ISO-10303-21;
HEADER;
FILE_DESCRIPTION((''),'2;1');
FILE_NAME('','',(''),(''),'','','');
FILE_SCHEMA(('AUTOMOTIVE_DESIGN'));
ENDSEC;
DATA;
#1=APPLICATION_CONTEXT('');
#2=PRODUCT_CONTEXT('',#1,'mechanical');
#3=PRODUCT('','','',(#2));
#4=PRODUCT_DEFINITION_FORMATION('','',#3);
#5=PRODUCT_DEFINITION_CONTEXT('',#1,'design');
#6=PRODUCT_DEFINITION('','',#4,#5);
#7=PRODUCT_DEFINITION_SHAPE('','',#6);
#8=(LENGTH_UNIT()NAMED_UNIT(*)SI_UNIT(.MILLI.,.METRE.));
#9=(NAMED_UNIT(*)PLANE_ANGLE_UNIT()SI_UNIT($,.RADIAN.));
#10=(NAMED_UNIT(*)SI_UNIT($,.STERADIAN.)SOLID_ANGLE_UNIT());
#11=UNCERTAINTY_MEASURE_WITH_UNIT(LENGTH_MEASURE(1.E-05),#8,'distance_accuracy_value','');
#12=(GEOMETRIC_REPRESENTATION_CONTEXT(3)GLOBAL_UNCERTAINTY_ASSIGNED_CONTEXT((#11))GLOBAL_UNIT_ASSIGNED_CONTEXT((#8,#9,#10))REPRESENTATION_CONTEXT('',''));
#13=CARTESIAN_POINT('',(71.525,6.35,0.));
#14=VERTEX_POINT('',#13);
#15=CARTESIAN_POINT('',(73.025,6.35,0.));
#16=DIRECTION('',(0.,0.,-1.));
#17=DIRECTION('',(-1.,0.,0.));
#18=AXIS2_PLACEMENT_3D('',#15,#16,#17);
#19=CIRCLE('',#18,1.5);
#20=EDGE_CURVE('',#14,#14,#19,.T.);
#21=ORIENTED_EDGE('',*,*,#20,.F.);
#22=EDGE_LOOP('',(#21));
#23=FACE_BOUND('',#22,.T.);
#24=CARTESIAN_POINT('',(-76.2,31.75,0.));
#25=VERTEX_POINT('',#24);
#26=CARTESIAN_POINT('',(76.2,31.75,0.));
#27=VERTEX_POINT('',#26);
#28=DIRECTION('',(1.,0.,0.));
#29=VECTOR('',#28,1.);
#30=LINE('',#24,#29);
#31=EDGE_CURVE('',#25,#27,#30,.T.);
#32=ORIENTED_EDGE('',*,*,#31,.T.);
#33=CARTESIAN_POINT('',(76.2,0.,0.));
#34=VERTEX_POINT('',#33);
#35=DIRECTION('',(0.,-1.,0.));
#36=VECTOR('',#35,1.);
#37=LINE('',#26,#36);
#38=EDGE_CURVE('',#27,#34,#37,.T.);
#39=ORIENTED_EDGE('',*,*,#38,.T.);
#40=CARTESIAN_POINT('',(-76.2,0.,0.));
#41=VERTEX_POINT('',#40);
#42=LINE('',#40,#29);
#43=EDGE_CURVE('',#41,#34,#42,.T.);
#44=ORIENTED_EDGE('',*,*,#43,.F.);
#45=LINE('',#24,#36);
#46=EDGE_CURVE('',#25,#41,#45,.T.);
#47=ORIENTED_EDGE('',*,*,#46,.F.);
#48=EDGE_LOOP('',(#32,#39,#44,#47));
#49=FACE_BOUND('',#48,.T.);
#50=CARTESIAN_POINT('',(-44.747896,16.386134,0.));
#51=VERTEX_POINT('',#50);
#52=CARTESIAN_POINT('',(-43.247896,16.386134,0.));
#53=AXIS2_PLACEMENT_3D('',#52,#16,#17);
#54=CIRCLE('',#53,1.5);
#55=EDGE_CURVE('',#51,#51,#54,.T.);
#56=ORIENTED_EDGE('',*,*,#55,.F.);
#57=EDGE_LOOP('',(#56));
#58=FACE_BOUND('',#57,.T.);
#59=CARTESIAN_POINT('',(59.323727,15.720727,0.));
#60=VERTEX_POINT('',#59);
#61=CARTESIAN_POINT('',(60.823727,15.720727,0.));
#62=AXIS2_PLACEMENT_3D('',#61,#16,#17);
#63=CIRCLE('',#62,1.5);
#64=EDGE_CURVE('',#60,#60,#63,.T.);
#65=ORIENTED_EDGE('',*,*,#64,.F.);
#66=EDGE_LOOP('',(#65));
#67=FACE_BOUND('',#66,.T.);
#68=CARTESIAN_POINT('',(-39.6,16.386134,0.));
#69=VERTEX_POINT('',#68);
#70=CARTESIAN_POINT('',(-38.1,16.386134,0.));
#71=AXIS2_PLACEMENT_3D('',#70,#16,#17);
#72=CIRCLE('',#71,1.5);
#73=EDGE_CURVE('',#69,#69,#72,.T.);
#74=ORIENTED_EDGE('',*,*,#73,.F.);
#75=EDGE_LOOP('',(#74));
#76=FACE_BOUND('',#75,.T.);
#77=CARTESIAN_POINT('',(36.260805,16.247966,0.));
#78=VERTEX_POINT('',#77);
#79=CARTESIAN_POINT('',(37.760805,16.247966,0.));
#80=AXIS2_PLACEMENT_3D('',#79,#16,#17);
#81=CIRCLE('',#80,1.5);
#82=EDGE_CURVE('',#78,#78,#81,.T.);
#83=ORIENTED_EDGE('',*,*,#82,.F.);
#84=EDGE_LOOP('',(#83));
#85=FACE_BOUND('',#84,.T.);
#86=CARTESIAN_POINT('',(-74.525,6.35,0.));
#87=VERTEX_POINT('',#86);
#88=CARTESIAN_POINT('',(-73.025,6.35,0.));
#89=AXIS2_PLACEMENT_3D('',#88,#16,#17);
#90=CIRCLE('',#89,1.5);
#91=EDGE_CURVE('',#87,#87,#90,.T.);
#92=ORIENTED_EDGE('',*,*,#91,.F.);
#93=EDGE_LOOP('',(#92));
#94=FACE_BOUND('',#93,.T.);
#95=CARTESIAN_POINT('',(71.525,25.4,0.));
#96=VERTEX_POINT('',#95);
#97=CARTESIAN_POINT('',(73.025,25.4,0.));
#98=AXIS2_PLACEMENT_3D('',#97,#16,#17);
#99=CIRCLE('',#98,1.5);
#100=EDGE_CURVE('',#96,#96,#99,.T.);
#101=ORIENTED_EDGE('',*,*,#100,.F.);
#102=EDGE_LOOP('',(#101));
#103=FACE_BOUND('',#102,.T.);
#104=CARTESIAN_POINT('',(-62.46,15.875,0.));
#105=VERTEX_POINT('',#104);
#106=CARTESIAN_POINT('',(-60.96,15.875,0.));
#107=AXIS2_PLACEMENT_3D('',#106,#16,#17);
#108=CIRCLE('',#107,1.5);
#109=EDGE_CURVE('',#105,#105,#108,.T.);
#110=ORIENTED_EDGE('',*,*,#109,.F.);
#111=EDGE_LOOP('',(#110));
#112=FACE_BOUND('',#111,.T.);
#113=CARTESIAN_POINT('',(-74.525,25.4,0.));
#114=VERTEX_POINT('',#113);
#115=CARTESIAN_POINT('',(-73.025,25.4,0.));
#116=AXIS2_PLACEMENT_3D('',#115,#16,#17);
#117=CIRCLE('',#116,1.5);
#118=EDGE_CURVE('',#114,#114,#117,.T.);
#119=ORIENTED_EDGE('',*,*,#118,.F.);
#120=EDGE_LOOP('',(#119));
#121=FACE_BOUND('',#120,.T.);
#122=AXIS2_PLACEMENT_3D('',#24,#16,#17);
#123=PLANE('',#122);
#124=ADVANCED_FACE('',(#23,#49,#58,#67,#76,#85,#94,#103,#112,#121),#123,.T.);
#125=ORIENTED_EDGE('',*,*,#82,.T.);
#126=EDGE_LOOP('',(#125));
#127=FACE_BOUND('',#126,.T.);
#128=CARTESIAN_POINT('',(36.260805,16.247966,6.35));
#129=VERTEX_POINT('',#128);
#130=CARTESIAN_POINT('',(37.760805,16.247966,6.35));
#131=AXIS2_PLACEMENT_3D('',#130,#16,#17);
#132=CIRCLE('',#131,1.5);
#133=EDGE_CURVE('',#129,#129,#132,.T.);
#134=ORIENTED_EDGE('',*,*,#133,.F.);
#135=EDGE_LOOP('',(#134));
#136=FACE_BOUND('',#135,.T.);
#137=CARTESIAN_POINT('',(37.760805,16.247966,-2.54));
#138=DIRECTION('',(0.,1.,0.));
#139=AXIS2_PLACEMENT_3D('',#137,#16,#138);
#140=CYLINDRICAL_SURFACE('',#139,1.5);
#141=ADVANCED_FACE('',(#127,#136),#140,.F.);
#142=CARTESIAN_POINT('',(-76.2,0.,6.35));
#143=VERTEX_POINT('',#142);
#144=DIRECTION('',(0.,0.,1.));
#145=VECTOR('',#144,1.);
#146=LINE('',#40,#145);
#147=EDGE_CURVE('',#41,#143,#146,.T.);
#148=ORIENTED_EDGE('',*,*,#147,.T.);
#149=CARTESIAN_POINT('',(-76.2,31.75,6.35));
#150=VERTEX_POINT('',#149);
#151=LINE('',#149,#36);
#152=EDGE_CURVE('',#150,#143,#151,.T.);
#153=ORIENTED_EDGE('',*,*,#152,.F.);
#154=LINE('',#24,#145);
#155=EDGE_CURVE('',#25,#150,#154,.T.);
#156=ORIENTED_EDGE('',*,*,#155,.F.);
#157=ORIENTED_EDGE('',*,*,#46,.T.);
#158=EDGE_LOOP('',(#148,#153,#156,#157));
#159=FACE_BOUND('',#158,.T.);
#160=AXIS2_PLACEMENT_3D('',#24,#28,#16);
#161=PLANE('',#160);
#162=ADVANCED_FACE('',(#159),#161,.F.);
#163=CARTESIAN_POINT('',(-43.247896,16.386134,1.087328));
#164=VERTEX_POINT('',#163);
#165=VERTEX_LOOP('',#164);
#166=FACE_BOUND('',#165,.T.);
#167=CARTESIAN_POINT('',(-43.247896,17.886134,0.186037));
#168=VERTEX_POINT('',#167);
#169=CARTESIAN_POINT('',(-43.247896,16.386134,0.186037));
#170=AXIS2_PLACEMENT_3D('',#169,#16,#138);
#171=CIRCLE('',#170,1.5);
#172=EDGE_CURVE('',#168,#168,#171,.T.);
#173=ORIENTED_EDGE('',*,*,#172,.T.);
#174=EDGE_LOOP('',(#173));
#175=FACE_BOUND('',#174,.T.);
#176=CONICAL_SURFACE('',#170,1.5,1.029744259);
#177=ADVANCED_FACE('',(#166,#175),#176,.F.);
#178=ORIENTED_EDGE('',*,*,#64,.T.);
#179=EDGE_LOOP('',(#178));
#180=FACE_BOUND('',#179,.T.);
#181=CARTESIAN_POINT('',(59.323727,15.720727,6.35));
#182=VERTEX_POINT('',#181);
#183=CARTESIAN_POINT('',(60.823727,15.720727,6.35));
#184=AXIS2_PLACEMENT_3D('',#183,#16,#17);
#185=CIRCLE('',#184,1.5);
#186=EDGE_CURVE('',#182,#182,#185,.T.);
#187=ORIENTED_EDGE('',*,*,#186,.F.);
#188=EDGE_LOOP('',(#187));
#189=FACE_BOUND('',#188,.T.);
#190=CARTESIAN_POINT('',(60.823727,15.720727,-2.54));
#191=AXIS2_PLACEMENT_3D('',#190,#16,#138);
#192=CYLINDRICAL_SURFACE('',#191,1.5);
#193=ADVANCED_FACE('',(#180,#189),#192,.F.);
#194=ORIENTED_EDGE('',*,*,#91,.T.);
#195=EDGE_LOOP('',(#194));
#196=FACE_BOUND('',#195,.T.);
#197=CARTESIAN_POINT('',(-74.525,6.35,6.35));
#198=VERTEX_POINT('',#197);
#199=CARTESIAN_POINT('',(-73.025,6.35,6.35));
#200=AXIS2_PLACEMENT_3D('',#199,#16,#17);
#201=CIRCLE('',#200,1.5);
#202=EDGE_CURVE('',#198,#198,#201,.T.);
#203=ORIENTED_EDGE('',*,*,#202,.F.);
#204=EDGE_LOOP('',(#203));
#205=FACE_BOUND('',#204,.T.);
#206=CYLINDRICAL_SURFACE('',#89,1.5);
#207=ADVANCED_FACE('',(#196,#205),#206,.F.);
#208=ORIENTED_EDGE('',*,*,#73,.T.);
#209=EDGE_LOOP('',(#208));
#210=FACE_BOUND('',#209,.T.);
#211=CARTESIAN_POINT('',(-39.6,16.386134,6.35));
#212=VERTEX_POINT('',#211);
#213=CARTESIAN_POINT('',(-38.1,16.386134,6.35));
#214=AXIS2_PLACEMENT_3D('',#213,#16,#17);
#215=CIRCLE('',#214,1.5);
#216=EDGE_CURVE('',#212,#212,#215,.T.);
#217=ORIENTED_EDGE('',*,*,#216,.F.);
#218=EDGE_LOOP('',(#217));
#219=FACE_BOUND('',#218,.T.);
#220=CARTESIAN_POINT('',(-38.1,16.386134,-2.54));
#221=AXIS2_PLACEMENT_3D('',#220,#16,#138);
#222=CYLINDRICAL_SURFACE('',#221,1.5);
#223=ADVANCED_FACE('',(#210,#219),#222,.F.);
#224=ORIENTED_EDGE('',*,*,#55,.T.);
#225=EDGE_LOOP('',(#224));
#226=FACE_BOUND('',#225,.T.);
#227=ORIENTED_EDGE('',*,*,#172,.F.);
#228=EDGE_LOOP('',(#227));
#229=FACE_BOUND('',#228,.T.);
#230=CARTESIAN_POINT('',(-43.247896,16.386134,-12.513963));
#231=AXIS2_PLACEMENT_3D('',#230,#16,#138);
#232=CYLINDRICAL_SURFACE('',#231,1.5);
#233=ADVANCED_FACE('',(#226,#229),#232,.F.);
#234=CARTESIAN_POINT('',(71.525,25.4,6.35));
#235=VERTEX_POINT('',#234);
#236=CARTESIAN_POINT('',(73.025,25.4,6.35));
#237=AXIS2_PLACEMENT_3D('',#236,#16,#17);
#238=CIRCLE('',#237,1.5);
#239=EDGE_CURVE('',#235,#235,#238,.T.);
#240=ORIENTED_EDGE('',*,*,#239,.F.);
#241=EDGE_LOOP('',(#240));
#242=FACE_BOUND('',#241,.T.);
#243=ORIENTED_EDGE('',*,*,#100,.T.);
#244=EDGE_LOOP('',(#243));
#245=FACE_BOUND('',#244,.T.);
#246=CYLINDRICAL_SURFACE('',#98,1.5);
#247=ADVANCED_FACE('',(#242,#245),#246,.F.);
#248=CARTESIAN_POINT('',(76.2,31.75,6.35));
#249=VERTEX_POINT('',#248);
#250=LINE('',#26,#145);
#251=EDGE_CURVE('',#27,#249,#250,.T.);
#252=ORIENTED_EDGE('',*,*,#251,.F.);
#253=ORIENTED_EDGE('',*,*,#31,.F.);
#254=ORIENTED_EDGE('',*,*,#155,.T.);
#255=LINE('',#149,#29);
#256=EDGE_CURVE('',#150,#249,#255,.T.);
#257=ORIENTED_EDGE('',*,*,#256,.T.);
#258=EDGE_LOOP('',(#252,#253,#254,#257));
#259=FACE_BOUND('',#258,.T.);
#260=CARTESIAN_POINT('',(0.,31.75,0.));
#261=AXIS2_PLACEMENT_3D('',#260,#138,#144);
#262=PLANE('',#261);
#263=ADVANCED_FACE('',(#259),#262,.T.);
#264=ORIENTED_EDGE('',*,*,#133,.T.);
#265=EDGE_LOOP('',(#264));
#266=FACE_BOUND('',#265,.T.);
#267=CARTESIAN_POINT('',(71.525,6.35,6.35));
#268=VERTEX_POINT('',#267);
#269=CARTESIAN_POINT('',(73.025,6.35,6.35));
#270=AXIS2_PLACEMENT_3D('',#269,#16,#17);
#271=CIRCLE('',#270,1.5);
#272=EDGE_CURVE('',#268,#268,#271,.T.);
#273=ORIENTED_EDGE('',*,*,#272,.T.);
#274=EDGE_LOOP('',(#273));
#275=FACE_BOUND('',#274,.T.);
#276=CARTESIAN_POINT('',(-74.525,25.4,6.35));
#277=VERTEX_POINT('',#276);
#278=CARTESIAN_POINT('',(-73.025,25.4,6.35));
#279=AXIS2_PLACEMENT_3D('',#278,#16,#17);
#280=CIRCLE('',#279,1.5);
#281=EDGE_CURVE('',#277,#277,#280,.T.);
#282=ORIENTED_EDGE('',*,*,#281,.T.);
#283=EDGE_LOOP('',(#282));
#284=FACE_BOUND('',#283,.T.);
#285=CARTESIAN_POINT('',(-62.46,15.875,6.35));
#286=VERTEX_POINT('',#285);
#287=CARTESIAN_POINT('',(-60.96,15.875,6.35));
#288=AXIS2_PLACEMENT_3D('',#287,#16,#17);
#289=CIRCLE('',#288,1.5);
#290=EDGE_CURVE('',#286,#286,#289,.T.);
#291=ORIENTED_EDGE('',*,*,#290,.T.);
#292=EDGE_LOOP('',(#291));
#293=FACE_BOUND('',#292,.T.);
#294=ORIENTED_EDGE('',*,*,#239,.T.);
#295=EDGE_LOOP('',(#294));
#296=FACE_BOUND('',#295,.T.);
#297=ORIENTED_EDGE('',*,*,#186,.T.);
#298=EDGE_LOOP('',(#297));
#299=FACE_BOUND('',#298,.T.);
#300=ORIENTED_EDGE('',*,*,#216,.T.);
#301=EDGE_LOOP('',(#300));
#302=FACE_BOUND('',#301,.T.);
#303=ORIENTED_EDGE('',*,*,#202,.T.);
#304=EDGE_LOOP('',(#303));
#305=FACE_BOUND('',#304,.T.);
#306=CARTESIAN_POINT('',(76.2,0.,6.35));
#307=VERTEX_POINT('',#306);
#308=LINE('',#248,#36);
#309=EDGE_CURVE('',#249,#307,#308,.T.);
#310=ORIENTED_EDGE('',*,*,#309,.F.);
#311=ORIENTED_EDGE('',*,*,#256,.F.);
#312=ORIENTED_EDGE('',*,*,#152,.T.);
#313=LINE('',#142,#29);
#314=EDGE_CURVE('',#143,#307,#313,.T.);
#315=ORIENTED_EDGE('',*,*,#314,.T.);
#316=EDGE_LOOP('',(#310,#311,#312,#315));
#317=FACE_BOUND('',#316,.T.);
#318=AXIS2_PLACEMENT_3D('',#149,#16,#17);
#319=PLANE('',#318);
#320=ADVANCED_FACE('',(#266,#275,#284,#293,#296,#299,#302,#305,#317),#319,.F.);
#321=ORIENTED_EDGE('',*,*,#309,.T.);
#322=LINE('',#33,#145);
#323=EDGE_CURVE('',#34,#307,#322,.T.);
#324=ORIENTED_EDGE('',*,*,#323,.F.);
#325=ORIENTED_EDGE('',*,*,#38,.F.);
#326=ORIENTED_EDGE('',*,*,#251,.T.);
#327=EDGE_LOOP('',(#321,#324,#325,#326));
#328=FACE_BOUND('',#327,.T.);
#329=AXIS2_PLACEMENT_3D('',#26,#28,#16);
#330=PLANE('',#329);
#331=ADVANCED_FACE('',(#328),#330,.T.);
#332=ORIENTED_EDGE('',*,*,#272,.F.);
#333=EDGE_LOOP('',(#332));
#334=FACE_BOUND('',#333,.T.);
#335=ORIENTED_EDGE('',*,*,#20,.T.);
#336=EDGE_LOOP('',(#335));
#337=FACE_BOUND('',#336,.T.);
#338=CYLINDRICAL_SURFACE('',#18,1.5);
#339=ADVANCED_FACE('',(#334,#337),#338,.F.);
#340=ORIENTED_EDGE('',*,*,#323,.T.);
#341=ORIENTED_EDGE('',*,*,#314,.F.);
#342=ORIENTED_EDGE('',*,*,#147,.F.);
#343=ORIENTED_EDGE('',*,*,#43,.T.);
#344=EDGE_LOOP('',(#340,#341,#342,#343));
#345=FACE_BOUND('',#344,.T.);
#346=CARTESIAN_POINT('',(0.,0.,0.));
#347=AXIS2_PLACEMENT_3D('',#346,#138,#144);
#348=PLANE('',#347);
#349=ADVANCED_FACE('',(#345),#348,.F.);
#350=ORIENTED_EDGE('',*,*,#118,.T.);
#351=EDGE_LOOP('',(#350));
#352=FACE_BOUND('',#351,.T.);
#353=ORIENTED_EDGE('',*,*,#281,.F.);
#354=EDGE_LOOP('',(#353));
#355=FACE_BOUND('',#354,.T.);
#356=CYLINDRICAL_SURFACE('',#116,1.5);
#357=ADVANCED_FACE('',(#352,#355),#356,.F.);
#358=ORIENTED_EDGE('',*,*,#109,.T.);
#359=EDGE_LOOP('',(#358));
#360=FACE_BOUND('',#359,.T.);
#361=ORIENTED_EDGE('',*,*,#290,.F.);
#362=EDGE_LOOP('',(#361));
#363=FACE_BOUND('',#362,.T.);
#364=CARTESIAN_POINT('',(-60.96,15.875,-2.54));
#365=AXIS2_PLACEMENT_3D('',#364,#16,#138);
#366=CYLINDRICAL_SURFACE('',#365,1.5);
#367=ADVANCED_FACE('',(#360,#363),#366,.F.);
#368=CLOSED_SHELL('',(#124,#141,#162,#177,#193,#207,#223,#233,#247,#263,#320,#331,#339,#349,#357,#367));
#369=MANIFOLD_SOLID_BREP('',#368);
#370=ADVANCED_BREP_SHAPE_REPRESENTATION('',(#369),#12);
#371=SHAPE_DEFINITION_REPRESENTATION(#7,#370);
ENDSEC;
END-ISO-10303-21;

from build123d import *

# Parameters (mm, degrees)
SKETCH1_W                      = 152.4
SKETCH1_H                      = 6.35
WALL_DEPTH                     = 31.75
F_3_0MM_DOWEL_HOLE2_AT_2_COUNT = 2
F_3_0MM_DOWEL_HOLE2_AT_2_PITCH = 19.05
F_3_0MM_DOWEL_HOLE1_D          = 3
F_3_0MM_DOWEL_HOLE1_DEPTH      = 12.7
F_3_0MM_DOWEL_HOLE1_TIP        = 0.901290929
F_3_0MM_DOWEL_HOLE4_D          = 3
F_3_0MM_DOWEL_HOLE4_DEPTH      = 12.7
F_3_0MM_DOWEL_HOLE4_TIP        = 0.901290929
F_3_0MM_DOWEL_HOLE5_OUTLINE_R  = 1.5
F_3_0MM_DOWEL_HOLE5_DEPTH      = 6.35


# Read off the part's stored shape, not the designer's step: Ø3.0mm Dowel Hole5, Ø3.0mm Dowel Hole6
with BuildPart() as part:
    # Sketch1 → wall (new body)
    with BuildSketch(Plane(origin=(0, 0, 0), x_dir=(1, 0, 0), z_dir=(0, 1, 0))):
        with Locations((0, -3.175)):
            Rectangle(SKETCH1_W, SKETCH1_H)
    extrude(amount=WALL_DEPTH)

    # Sketch5 → Ø3.0mm Dowel Hole2 (revolve, cut)
    with BuildSketch(Plane(origin=(-73.025, 25.4, 0), x_dir=(0, 1, 0), z_dir=(1, 0, 0))):
        Polygon((0, 0), (0, 15.901286329), (1.5, 14.9999954), (1.5, 0), align=None)
    f_3_0mm_dowel_hole2 = revolve(axis=Axis((-73.025, 25.4, -6.35), (0, 0, 1)), mode=Mode.SUBTRACT)

    # Ø3.0mm Dowel Hole2 at 2: Ø3.0mm Dowel Hole2 ×2
    with Locations(*[(0, -i * F_3_0MM_DOWEL_HOLE2_AT_2_PITCH, 0) for i in range(1, F_3_0MM_DOWEL_HOLE2_AT_2_COUNT)]):
        add(f_3_0mm_dowel_hole2, mode=Mode.SUBTRACT)

    # Mirror1: Ø3.0mm Dowel Hole2 across plane
    add(f_3_0mm_dowel_hole2.mirror(Plane(origin=(0, 0, 0), x_dir=(0, 0, 1), z_dir=(1, 0, 0))), mode=Mode.SUBTRACT)

    # Mirror1 copy 1 sketch → Mirror1 copy 1 (revolve, cut)
    with BuildSketch(Plane(origin=(73.025, 6.35, 0), x_dir=(0, 1, 0), z_dir=(-1, 0, 0))):
        Polygon((0, 0), (0, -15.901286329), (1.5, -14.9999954), (1.5, 0), align=None)
    revolve(axis=Axis((73.025, 6.35, -6.35), (0, 0, -1)), mode=Mode.SUBTRACT)

    # Ø3.0mm Dowel Hole1
    with Locations(Plane(origin=(76.2, 31.75, -2.54), x_dir=(1, 0, 0), z_dir=(0, 0, -1))):
        with Locations((-137.16, 15.875)):
            Hole(F_3_0MM_DOWEL_HOLE1_D / 2, depth=F_3_0MM_DOWEL_HOLE1_DEPTH)
            with Locations((0, 0, -(F_3_0MM_DOWEL_HOLE1_DEPTH + F_3_0MM_DOWEL_HOLE1_TIP / 2))):  # 118° drill point
                Cone(0, F_3_0MM_DOWEL_HOLE1_D / 2, F_3_0MM_DOWEL_HOLE1_TIP, mode=Mode.SUBTRACT)

    # Ø3.0mm Dowel Hole4
    with Locations(Plane(origin=(76.2, 31.75, -2.54), x_dir=(1, 0, 0), z_dir=(0, 0, -1))):
        with Locations((-38.439194916, 15.502033877), (-15.376273346, 16.029273481)):
            Hole(F_3_0MM_DOWEL_HOLE4_D / 2, depth=F_3_0MM_DOWEL_HOLE4_DEPTH)
            with Locations((0, 0, -(F_3_0MM_DOWEL_HOLE4_DEPTH + F_3_0MM_DOWEL_HOLE4_TIP / 2))):  # 118° drill point
                Cone(0, F_3_0MM_DOWEL_HOLE4_D / 2, F_3_0MM_DOWEL_HOLE4_TIP, mode=Mode.SUBTRACT)

    # Ø3.0mm Dowel Hole5 outline → Ø3.0mm Dowel Hole5 (cut)
    with BuildSketch(Plane.XY):
        with Locations((-38.1, 16.386133576)):
            Circle(F_3_0MM_DOWEL_HOLE5_OUTLINE_R)
    extrude(amount=F_3_0MM_DOWEL_HOLE5_DEPTH, mode=Mode.SUBTRACT)

    # Ø3.0mm Dowel Hole6 outline → Ø3.0mm Dowel Hole6 (revolve, cut)
    with BuildSketch(Plane(origin=(-43.247895679, 16.386133576, 0), x_dir=(1, 0, 0), z_dir=(0, -1, 0))):
        Polygon((1.5, 0.186037407), (0, 1.087328336), (0, 0), (1.5, 0), align=None)
    revolve(axis=Axis((-43.247895679, 16.386133576, 0), (0, 0, 1)), mode=Mode.SUBTRACT)


solid = part.part
